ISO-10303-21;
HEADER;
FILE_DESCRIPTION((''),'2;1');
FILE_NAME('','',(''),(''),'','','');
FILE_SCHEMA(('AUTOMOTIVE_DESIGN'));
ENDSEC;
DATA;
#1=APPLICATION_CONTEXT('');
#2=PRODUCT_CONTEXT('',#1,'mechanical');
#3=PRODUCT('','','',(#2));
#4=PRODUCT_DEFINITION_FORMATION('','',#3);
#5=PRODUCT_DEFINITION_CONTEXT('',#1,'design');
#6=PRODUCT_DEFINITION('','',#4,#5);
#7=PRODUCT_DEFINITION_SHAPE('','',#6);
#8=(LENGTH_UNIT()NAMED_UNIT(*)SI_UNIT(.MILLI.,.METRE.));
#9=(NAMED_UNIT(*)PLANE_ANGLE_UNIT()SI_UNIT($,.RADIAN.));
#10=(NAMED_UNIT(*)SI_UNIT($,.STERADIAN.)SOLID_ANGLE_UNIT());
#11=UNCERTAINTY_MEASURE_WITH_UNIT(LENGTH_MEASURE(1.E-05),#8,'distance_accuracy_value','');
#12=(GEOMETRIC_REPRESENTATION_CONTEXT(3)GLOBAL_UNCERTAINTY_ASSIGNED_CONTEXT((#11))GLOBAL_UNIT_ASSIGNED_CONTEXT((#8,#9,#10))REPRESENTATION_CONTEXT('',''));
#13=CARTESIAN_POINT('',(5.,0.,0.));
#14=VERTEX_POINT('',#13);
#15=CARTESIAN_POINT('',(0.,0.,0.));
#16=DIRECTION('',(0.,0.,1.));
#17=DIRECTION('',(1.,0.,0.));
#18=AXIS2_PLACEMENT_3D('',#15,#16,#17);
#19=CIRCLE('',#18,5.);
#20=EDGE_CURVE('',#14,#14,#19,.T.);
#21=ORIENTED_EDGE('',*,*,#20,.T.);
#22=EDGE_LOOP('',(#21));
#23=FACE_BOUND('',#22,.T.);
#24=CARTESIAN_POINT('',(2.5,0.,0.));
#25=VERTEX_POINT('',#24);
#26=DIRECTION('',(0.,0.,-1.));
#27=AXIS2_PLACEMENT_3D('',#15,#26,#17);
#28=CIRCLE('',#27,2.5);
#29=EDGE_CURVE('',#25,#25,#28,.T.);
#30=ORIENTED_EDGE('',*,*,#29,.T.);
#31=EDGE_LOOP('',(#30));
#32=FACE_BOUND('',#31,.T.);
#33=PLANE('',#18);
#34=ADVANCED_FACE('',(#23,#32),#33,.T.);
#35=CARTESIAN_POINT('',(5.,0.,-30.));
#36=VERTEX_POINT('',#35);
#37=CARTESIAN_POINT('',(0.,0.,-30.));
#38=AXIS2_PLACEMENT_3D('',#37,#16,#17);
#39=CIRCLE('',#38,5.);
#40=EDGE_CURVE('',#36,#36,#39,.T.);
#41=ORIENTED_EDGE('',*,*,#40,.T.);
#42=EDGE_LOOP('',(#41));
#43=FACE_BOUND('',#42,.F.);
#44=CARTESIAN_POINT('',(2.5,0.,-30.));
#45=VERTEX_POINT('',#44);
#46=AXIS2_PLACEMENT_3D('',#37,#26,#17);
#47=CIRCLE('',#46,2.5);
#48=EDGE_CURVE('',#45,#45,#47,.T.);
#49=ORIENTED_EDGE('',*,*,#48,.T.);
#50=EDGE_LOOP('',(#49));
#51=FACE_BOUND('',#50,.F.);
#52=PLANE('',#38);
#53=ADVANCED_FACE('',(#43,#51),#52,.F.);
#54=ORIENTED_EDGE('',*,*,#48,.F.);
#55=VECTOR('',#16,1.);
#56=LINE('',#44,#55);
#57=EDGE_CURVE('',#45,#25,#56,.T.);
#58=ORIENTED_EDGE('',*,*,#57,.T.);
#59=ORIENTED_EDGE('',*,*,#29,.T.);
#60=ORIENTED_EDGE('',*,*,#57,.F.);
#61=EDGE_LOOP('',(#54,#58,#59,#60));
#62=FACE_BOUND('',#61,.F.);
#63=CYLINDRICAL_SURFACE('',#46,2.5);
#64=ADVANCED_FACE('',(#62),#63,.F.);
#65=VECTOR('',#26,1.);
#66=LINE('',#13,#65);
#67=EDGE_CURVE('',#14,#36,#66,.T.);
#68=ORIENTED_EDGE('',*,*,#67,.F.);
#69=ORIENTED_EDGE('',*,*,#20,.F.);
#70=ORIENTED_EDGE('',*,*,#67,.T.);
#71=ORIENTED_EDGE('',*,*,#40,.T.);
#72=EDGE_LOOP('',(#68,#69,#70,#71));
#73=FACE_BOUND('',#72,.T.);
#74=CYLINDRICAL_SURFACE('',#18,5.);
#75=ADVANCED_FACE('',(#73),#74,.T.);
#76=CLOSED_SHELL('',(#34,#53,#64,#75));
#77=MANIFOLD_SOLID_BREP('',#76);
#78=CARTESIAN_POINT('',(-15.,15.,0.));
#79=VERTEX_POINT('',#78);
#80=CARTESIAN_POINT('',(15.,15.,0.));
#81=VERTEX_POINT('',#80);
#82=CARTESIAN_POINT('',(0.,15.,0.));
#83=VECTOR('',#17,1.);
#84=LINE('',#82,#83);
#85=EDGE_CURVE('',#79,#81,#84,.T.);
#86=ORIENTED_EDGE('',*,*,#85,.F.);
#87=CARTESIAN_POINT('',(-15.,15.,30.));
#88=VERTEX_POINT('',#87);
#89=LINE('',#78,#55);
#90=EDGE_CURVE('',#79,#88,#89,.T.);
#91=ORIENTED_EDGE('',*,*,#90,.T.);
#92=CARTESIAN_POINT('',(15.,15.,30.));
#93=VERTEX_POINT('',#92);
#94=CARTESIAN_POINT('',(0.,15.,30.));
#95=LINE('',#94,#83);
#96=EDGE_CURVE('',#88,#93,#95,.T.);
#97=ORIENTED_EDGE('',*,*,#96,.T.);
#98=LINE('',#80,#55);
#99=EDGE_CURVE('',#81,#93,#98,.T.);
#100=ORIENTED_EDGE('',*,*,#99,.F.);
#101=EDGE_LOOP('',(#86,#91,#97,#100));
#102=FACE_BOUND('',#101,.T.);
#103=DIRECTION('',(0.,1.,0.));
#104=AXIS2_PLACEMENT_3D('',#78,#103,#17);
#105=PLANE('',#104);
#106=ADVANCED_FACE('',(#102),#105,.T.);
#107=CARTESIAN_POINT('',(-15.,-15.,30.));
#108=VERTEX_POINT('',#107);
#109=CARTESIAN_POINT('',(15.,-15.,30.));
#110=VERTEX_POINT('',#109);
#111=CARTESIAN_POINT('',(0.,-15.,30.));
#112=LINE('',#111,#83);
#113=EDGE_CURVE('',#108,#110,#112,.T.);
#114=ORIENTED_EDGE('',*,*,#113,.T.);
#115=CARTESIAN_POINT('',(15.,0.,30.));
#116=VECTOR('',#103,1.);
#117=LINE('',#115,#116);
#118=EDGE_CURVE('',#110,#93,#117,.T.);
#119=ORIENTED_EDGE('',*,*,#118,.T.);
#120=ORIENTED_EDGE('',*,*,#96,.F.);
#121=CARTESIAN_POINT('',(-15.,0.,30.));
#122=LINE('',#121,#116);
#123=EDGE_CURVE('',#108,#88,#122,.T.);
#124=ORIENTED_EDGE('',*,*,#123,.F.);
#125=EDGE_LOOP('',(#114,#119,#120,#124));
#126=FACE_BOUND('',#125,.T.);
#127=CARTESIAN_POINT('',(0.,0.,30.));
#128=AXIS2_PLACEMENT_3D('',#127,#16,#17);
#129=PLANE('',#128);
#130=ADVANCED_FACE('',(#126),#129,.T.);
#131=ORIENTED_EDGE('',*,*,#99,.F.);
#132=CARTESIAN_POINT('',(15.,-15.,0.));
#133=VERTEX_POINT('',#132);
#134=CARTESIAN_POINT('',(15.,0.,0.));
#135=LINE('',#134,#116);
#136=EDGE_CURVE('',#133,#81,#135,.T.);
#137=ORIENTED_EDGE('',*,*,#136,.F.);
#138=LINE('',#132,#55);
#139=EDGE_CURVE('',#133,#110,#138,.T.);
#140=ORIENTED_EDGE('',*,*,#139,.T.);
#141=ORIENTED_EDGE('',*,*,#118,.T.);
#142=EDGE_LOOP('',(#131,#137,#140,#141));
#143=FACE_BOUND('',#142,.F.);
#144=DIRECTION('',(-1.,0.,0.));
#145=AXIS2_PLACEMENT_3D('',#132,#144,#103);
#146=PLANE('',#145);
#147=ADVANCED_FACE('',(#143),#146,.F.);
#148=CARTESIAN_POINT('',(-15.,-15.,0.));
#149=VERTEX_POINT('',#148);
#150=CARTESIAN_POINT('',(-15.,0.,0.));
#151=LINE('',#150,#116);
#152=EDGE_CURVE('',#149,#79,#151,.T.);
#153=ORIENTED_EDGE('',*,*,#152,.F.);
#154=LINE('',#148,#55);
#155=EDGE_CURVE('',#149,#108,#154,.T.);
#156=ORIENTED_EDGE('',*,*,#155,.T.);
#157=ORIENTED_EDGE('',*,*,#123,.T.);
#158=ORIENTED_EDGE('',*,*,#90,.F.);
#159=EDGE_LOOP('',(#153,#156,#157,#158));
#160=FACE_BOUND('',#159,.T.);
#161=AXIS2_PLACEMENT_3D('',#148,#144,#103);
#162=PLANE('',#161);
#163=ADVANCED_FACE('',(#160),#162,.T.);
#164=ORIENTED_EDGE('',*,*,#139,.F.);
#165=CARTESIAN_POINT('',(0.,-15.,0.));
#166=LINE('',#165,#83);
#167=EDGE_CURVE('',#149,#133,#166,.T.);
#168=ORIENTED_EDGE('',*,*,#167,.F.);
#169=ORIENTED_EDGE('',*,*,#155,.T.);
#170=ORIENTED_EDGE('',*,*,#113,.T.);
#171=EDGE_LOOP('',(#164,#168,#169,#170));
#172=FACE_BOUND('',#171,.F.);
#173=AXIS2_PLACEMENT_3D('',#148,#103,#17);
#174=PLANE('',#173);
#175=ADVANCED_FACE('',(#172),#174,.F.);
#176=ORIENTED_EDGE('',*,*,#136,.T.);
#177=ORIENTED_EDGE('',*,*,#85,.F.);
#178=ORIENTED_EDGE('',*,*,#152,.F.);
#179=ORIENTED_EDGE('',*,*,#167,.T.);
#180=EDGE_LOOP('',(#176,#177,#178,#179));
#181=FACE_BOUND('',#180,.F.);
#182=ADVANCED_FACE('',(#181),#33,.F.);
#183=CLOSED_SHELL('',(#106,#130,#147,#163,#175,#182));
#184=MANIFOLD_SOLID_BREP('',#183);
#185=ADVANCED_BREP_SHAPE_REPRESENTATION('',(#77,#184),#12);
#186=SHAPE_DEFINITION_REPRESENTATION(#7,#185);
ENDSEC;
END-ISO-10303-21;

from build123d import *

# Parameters (mm, degrees)
F0_W     = 30
F0_H     = 30
F1_DEPTH = 30
F2_R     = 5
F3_DEPTH = 30
F4_R     = 2.5
F5_DEPTH = 70


with BuildPart() as f1:
    # F0 (on Top) → F1 (new body)
    with BuildSketch(Plane.XY):
        Rectangle(F0_W, F0_H)
    extrude(amount=F1_DEPTH)


with BuildPart() as f3:
    # F2 (on Top) → F3 (new body)
    with BuildSketch(Plane.XY):
        Circle(F2_R)
    extrude(amount=-F3_DEPTH)

    # F4 (on face) → F5 (cut)
    with BuildSketch(Plane(origin=(0, 0, -30), x_dir=(1, 0, 0), z_dir=(0, 0, -1))):
        Circle(F4_R)
    extrude(amount=-F5_DEPTH, mode=Mode.SUBTRACT)


solid = Compound([f1.part, f3.part])
